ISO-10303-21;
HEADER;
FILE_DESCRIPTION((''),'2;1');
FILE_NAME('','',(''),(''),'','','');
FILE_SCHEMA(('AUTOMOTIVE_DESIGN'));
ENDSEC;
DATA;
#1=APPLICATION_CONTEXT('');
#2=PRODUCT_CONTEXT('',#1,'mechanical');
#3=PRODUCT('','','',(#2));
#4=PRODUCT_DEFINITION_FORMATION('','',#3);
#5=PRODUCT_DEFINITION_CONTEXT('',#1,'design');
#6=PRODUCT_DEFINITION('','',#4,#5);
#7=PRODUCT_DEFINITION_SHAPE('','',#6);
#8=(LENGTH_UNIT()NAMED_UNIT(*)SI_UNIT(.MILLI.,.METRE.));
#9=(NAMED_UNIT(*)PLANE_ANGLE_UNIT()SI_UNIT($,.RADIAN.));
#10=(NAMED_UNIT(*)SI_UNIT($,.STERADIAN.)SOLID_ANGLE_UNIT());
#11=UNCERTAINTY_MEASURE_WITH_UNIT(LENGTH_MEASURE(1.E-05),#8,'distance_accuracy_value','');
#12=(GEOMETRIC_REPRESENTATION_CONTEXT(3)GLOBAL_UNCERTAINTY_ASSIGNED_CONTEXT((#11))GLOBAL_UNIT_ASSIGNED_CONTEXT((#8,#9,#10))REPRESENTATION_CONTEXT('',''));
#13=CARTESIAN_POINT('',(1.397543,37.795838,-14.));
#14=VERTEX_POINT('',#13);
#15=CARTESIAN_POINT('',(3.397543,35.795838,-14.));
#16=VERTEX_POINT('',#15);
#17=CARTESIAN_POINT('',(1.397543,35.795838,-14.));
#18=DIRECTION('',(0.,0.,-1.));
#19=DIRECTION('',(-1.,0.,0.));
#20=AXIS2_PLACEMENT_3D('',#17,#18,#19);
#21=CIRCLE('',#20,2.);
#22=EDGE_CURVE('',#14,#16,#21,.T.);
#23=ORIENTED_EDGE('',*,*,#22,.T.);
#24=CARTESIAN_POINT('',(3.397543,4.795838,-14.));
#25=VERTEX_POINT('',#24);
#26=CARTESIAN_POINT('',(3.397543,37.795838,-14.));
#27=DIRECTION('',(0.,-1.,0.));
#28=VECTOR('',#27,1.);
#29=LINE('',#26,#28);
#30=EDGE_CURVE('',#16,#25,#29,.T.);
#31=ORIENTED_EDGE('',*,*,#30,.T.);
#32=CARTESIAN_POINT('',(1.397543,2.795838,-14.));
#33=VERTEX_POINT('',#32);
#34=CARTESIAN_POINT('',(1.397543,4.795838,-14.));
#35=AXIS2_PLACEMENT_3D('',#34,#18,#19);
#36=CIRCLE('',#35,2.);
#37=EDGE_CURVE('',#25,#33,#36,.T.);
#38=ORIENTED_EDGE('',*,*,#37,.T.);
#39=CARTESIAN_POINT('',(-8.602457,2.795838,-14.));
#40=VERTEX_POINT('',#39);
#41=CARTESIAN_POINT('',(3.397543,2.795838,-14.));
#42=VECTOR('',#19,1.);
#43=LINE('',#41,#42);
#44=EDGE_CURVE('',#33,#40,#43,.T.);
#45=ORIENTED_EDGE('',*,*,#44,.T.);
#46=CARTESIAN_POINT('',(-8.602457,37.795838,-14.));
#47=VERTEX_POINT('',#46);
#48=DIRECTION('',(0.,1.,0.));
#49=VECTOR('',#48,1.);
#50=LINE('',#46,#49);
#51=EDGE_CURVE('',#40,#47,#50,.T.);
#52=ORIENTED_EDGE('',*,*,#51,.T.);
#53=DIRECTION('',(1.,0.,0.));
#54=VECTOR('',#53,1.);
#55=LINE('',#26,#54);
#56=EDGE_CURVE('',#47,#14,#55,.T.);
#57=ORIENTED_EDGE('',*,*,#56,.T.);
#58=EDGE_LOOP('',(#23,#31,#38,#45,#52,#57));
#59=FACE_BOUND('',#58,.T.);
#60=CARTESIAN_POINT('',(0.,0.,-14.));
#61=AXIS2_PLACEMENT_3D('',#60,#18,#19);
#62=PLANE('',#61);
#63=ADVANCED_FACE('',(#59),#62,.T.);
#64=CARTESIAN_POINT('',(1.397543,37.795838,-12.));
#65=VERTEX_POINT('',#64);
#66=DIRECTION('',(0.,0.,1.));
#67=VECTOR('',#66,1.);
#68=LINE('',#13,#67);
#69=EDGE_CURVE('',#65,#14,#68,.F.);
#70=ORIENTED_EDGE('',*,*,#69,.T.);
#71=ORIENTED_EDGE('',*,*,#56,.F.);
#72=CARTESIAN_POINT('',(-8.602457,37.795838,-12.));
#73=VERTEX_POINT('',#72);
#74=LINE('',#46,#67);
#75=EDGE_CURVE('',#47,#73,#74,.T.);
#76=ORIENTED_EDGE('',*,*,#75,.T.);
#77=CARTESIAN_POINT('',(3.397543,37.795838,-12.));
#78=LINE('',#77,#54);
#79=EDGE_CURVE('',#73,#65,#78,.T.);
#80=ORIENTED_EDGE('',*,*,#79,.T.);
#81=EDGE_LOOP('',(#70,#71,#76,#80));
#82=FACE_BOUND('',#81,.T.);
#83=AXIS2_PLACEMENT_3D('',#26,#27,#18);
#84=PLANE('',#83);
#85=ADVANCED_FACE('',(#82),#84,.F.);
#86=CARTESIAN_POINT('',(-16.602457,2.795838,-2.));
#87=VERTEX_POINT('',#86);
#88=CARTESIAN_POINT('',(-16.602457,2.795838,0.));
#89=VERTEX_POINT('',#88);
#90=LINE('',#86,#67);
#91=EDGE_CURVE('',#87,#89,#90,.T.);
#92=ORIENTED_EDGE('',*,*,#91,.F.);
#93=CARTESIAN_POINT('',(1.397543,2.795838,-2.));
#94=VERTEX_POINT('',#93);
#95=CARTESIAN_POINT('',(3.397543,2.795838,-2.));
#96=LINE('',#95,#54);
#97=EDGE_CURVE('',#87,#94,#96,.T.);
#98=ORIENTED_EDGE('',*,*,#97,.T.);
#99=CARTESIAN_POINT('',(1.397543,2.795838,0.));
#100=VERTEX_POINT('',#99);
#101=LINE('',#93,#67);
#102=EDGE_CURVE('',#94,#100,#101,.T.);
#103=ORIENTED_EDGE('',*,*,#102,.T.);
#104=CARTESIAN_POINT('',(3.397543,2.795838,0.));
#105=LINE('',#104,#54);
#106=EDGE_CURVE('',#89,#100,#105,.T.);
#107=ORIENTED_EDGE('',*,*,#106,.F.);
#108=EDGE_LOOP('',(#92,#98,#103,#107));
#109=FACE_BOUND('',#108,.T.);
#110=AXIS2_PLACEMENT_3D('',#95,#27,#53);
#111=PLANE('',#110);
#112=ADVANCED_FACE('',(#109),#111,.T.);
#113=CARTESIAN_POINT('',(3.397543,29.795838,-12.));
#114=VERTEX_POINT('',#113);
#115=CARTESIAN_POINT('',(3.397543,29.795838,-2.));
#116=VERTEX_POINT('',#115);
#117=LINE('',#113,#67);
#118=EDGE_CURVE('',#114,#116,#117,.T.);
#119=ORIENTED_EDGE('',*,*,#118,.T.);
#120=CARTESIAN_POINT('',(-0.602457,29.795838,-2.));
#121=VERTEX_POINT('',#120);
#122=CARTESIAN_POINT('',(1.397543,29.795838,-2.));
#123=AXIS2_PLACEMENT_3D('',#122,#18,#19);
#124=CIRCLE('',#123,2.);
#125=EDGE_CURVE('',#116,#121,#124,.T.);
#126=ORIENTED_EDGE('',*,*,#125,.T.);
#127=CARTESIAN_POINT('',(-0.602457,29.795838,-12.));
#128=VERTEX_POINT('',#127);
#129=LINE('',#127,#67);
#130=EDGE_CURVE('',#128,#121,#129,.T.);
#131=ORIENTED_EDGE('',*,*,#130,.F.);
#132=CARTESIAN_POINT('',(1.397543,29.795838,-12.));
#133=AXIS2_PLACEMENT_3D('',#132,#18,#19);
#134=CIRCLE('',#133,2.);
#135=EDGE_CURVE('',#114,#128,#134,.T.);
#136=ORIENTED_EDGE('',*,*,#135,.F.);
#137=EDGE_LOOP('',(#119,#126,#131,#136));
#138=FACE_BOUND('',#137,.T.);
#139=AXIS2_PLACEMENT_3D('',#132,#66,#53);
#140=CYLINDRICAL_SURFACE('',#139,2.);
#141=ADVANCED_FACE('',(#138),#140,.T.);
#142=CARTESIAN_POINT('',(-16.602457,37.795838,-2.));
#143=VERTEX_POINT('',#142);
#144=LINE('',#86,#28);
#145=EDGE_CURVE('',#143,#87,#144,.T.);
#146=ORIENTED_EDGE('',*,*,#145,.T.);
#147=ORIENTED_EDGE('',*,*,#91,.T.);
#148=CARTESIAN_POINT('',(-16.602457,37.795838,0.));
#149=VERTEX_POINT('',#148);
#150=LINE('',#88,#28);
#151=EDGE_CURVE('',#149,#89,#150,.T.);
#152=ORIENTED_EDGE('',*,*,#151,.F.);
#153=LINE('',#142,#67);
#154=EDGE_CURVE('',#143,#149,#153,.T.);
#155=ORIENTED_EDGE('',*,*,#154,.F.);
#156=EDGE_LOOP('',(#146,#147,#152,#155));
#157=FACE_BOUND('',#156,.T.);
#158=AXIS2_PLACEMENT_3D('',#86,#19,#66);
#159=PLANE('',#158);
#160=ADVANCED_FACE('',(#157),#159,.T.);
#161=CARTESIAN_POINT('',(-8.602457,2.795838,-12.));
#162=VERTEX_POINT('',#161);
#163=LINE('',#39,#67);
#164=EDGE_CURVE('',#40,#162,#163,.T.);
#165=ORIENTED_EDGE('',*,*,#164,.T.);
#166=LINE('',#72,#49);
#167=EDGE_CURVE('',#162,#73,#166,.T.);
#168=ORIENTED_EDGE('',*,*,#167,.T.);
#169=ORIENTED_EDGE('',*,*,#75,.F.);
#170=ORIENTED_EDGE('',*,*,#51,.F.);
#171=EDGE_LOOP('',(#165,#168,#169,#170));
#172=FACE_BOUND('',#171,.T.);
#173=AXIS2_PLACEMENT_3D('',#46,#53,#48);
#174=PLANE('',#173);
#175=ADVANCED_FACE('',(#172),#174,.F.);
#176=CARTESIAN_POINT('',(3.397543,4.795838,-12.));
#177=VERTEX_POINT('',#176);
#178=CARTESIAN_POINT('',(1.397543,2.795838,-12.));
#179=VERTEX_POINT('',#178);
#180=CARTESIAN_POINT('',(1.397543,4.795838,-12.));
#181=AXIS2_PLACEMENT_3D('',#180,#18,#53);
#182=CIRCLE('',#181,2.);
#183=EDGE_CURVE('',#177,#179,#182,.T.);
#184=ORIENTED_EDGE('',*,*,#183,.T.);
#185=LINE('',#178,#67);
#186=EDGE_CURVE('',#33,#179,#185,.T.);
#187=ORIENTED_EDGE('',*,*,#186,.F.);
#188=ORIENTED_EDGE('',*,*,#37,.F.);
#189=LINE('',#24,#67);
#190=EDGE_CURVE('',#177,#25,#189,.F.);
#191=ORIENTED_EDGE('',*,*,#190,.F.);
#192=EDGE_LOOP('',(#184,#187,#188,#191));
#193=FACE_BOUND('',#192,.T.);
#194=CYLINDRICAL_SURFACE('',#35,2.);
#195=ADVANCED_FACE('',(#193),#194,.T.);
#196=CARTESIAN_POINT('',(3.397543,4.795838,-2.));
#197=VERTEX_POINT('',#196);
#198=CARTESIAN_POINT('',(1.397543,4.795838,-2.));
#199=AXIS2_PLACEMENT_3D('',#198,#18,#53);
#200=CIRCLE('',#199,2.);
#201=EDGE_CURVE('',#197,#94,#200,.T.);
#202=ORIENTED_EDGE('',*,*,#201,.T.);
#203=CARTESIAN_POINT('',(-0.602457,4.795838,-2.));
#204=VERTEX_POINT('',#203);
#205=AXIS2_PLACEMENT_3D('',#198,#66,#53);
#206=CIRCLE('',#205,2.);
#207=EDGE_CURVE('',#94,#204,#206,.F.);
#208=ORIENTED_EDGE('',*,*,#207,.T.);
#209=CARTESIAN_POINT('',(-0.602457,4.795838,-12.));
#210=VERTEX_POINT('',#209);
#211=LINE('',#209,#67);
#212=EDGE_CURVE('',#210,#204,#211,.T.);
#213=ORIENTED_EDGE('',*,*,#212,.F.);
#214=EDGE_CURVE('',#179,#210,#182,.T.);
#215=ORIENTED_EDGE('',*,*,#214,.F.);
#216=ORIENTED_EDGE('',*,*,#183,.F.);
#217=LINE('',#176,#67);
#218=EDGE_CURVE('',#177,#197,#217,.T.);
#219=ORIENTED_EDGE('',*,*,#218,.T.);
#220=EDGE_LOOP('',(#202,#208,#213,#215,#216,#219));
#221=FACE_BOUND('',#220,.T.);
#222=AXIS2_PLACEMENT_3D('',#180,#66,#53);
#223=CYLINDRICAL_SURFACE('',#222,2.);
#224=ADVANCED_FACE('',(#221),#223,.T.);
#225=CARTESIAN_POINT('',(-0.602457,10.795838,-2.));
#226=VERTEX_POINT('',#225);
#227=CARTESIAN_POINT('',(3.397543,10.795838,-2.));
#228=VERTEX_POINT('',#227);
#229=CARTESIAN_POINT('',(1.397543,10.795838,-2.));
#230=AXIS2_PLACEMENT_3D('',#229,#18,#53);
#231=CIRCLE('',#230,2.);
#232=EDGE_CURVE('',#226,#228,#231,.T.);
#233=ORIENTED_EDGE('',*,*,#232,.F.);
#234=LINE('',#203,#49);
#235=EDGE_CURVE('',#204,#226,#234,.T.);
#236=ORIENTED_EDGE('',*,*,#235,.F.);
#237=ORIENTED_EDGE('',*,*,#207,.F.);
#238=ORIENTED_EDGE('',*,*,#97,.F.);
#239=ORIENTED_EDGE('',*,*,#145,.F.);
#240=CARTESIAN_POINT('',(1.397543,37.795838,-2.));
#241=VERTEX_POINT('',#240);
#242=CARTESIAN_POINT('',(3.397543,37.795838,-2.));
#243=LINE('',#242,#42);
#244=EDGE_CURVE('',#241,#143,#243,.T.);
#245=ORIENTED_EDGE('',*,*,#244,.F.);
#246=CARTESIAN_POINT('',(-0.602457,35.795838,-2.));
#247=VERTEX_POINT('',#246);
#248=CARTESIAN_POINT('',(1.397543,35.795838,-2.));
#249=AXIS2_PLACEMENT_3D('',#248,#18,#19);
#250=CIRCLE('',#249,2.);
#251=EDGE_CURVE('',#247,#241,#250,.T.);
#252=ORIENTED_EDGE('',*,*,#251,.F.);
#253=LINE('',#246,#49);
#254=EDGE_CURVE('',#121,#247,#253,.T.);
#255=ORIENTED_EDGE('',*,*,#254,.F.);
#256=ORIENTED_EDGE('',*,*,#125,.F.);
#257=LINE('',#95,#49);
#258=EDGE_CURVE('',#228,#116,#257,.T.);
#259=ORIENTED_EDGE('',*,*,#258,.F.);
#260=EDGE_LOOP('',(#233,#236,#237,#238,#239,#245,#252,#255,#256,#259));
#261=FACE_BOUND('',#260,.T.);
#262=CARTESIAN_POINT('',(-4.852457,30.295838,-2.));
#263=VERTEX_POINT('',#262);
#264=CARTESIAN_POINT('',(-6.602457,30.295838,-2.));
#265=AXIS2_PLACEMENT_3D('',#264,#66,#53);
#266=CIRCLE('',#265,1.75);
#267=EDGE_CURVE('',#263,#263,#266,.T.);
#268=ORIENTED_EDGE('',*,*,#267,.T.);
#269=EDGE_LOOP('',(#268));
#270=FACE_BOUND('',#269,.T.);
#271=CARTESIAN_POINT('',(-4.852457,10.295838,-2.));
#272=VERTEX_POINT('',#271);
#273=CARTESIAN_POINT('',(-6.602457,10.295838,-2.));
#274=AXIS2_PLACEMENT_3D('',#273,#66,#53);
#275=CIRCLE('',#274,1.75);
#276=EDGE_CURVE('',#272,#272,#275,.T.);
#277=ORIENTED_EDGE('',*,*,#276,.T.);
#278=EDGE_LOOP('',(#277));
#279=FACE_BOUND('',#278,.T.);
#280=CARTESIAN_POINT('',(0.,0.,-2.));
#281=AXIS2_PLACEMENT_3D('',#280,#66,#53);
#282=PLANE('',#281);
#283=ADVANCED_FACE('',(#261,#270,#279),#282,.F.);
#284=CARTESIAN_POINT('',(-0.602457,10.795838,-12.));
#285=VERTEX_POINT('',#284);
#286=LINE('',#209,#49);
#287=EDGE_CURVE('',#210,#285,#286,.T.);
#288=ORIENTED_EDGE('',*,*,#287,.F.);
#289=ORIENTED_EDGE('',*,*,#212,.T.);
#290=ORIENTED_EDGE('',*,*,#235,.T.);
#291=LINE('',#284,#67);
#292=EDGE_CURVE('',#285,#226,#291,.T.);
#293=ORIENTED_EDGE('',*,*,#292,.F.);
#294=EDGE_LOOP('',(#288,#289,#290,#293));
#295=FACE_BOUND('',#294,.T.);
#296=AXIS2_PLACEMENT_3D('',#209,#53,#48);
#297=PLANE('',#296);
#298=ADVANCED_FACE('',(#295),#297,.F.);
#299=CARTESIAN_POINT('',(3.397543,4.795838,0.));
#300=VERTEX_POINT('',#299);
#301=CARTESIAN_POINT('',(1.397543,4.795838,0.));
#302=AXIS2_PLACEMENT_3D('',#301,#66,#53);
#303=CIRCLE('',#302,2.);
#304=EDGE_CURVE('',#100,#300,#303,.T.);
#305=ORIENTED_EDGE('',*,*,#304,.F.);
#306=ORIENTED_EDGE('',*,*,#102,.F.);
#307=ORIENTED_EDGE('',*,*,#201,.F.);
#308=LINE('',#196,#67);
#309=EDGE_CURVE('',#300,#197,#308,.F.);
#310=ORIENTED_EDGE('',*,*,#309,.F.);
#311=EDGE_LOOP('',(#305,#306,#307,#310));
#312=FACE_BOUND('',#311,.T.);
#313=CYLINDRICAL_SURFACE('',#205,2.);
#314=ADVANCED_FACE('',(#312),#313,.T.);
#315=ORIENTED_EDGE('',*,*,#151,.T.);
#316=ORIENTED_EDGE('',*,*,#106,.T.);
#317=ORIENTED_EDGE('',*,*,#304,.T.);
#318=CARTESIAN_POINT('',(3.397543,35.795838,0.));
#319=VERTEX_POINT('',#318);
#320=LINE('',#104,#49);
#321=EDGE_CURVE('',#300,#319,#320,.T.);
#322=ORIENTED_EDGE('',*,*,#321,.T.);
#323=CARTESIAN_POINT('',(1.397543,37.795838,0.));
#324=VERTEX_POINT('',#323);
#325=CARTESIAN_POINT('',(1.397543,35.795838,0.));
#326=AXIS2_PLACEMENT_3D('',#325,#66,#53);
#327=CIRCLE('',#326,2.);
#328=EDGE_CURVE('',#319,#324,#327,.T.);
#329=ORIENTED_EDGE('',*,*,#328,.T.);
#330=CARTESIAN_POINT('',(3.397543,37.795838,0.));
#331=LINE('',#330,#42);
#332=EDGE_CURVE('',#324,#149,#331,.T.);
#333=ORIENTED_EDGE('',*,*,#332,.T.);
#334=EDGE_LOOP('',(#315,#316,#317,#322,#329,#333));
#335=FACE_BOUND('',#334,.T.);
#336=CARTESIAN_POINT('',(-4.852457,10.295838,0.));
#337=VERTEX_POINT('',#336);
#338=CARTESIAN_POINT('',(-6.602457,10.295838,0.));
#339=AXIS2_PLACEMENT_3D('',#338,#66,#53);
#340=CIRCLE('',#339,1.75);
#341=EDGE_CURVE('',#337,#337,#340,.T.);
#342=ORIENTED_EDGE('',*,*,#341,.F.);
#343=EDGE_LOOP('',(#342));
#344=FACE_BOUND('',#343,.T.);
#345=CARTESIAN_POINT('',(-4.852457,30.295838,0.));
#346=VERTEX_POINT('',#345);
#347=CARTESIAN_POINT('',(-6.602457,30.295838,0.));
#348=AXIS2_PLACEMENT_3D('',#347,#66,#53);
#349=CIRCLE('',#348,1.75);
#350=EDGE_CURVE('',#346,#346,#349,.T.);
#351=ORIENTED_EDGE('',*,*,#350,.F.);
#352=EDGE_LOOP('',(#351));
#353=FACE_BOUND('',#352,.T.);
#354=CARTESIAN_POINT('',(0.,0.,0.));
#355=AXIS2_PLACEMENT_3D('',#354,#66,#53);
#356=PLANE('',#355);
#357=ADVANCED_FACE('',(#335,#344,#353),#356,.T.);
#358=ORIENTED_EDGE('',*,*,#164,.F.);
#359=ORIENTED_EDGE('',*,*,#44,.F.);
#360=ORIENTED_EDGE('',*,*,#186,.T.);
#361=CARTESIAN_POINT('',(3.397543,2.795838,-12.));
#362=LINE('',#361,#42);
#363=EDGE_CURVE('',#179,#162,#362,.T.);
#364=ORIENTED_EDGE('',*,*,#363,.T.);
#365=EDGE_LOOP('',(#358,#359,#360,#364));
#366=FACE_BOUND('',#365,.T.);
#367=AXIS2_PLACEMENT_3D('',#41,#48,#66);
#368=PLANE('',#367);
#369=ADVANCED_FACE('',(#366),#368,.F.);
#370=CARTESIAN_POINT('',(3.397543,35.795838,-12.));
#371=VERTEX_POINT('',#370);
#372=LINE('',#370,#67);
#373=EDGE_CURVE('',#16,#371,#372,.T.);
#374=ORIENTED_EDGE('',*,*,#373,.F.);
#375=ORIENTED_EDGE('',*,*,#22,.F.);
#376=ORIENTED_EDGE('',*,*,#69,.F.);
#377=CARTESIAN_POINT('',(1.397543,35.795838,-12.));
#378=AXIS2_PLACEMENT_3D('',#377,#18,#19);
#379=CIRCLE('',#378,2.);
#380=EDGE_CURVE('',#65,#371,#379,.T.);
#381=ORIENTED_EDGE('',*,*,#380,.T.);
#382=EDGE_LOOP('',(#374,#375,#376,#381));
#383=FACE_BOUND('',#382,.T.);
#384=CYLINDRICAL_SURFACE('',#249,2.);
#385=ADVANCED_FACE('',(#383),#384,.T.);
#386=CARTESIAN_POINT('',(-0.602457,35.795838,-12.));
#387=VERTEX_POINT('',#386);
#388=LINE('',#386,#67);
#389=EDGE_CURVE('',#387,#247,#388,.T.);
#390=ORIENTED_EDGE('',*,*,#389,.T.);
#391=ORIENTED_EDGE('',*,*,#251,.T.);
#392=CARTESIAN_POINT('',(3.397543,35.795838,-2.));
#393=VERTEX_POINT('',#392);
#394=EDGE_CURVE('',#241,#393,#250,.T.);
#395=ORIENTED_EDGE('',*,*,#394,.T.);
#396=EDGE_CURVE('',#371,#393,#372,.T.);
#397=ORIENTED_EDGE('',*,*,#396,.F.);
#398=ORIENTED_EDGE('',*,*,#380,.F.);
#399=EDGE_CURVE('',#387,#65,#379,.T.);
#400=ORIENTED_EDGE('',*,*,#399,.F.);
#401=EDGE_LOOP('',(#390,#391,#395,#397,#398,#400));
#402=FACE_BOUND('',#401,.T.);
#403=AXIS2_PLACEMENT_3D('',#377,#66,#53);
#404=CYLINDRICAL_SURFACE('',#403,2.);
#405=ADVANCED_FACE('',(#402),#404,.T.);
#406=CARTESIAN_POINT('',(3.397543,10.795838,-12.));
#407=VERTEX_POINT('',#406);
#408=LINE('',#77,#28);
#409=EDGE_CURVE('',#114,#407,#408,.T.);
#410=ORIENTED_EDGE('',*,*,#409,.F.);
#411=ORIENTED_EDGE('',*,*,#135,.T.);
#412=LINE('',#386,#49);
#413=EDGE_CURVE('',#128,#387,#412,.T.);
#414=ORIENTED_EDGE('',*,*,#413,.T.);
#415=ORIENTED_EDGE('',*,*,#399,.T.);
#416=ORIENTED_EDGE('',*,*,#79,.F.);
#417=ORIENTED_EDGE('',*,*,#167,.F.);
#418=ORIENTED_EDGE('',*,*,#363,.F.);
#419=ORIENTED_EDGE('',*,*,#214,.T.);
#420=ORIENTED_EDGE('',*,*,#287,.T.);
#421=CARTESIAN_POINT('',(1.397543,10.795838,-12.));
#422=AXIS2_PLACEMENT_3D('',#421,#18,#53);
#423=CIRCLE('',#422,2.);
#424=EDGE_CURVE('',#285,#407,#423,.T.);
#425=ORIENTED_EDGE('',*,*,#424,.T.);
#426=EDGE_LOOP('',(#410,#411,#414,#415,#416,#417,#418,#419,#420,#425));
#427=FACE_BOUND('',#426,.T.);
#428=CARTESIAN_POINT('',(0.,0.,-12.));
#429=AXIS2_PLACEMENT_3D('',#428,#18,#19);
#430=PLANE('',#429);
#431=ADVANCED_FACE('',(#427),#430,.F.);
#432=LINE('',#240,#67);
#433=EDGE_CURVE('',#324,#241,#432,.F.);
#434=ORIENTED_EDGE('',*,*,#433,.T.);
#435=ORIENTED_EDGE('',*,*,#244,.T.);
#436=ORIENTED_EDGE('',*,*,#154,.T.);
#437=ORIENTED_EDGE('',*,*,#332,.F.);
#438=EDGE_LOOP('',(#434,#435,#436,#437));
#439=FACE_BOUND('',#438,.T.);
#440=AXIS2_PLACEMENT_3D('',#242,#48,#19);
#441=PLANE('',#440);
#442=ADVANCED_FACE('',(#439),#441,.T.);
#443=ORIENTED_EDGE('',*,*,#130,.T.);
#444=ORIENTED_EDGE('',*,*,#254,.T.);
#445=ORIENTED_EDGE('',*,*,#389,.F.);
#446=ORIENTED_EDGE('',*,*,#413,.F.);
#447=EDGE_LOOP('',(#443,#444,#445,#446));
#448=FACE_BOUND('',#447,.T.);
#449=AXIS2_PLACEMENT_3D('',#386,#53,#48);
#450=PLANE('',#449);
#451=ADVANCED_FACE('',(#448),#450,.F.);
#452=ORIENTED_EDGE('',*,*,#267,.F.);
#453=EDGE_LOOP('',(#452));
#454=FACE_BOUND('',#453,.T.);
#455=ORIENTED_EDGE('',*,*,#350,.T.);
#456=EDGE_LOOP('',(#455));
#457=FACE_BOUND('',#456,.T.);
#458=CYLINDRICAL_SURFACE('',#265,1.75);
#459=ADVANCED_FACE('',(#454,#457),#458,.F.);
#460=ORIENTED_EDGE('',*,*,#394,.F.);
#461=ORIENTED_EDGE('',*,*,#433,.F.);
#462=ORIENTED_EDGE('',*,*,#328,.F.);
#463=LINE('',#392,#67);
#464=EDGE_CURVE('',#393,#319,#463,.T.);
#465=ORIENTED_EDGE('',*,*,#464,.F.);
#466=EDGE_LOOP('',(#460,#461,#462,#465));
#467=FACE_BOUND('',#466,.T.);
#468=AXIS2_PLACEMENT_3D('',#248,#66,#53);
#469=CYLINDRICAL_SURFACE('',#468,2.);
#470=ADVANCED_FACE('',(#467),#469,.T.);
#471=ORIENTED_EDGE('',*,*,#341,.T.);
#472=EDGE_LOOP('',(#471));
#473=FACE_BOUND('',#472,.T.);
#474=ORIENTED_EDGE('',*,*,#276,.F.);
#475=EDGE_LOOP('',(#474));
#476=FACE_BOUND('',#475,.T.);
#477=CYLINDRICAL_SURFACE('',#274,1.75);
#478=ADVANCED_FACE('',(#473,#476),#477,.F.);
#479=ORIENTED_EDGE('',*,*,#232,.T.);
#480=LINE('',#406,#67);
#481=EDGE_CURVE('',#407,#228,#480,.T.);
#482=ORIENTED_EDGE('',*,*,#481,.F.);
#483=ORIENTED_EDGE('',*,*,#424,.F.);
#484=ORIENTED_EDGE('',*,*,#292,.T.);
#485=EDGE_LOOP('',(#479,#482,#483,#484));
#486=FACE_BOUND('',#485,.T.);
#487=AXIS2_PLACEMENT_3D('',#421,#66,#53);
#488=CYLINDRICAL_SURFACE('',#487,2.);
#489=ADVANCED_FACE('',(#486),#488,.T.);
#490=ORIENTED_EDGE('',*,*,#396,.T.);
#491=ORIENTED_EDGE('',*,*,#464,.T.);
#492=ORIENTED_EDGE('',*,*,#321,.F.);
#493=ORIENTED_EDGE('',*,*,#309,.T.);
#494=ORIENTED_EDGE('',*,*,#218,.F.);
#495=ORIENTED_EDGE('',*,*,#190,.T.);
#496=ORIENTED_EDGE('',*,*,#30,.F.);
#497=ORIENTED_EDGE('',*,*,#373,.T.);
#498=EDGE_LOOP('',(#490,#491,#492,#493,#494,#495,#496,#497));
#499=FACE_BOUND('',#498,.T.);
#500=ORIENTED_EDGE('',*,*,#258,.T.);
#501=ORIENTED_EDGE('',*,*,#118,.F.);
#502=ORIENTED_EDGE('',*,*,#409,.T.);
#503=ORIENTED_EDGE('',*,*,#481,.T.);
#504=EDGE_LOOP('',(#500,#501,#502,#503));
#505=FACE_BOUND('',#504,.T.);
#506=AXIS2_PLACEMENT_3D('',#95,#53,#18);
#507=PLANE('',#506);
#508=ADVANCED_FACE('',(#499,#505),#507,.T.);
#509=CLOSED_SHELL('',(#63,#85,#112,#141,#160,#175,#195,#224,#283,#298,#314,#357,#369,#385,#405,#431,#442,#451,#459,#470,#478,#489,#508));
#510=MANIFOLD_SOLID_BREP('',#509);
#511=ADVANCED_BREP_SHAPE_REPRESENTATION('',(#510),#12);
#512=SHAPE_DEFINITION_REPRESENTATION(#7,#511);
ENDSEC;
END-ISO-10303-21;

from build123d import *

# Parameters (mm, degrees)
ESQUISSE1_W        = 20
ESQUISSE1_H        = 35
ESQUISSE1_R        = 1.75
BOSS_EXTRU_1_DEPTH = 2
BOSS_EXTRU_2_DEPTH = 10
ESQUISSE3_W        = 12
ESQUISSE3_H        = 35
BOSS_EXTRU_3_DEPTH = 2
CONG_1_R           = 2


with BuildPart() as part:
    # Esquisse1 → Boss.-Extru.1 (new body)
    with BuildSketch(Plane.XY):
        with Locations((-6.602456785, 20.295838232)):
            Rectangle(ESQUISSE1_W, ESQUISSE1_H)
        with Locations((-6.602456785, 30.295838232)):
            Circle(ESQUISSE1_R, mode=Mode.SUBTRACT)
        with Locations((-6.602456785, 10.295838232)):
            Circle(ESQUISSE1_R, mode=Mode.SUBTRACT)
    extrude(amount=-BOSS_EXTRU_1_DEPTH)

    # Esquisse2 → Boss.-Extru.2 (add)
    with BuildSketch(Plane(origin=(0, 0, -2), x_dir=(-1, 0, 0), z_dir=(0, 0, -1))):
        with BuildLine():
            Line((0.602456785, 35.795838232), (0.602456785, 29.795838232))
            ThreePointArc((0.602456785, 29.795838232), (-1.397543215, 27.795838232), (-3.397543215, 29.795838232))
            Line((-3.397543215, 29.795838232), (-3.397543215, 35.795838232))
            ThreePointArc((-3.397543215, 35.795838232), (-1.397543215, 37.795838232), (0.602456785, 35.795838232))
        make_face()
        with BuildLine():
            Line((0.602456785, 4.795838232), (0.602456785, 10.795838232))
            ThreePointArc((0.602456785, 10.795838232), (-1.397543215, 12.795838232), (-3.397543215, 10.795838232))
            Line((-3.397543215, 10.795838232), (-3.397543215, 4.795838232))
            ThreePointArc((-3.397543215, 4.795838232), (-1.397543215, 2.795838232), (0.602456785, 4.795838232))
        make_face()
    extrude(amount=BOSS_EXTRU_2_DEPTH)

    # Esquisse3 → Boss.-Extru.3 (add)
    with BuildSketch(Plane(origin=(0, 0, -12), x_dir=(-1, 0, 0), z_dir=(0, 0, -1))):
        with Locations((2.602456785, 20.295838232)):
            Rectangle(ESQUISSE3_W, ESQUISSE3_H)
    extrude(amount=BOSS_EXTRU_3_DEPTH)

    # Congé1
    cong_1_edges = [part.edges().sort_by_distance(p)[0] for p in [
        (3.397543215, 2.795838232, -1),
        (3.397543215, 37.795838232, -13),
        (3.397543215, 2.795838232, -13),
        (3.397543215, 37.795838232, -1),
    ]]
    fillet(cong_1_edges, radius=CONG_1_R - 0.0001)  # a hair under: the kernel refuses the full size


solid = part.part
